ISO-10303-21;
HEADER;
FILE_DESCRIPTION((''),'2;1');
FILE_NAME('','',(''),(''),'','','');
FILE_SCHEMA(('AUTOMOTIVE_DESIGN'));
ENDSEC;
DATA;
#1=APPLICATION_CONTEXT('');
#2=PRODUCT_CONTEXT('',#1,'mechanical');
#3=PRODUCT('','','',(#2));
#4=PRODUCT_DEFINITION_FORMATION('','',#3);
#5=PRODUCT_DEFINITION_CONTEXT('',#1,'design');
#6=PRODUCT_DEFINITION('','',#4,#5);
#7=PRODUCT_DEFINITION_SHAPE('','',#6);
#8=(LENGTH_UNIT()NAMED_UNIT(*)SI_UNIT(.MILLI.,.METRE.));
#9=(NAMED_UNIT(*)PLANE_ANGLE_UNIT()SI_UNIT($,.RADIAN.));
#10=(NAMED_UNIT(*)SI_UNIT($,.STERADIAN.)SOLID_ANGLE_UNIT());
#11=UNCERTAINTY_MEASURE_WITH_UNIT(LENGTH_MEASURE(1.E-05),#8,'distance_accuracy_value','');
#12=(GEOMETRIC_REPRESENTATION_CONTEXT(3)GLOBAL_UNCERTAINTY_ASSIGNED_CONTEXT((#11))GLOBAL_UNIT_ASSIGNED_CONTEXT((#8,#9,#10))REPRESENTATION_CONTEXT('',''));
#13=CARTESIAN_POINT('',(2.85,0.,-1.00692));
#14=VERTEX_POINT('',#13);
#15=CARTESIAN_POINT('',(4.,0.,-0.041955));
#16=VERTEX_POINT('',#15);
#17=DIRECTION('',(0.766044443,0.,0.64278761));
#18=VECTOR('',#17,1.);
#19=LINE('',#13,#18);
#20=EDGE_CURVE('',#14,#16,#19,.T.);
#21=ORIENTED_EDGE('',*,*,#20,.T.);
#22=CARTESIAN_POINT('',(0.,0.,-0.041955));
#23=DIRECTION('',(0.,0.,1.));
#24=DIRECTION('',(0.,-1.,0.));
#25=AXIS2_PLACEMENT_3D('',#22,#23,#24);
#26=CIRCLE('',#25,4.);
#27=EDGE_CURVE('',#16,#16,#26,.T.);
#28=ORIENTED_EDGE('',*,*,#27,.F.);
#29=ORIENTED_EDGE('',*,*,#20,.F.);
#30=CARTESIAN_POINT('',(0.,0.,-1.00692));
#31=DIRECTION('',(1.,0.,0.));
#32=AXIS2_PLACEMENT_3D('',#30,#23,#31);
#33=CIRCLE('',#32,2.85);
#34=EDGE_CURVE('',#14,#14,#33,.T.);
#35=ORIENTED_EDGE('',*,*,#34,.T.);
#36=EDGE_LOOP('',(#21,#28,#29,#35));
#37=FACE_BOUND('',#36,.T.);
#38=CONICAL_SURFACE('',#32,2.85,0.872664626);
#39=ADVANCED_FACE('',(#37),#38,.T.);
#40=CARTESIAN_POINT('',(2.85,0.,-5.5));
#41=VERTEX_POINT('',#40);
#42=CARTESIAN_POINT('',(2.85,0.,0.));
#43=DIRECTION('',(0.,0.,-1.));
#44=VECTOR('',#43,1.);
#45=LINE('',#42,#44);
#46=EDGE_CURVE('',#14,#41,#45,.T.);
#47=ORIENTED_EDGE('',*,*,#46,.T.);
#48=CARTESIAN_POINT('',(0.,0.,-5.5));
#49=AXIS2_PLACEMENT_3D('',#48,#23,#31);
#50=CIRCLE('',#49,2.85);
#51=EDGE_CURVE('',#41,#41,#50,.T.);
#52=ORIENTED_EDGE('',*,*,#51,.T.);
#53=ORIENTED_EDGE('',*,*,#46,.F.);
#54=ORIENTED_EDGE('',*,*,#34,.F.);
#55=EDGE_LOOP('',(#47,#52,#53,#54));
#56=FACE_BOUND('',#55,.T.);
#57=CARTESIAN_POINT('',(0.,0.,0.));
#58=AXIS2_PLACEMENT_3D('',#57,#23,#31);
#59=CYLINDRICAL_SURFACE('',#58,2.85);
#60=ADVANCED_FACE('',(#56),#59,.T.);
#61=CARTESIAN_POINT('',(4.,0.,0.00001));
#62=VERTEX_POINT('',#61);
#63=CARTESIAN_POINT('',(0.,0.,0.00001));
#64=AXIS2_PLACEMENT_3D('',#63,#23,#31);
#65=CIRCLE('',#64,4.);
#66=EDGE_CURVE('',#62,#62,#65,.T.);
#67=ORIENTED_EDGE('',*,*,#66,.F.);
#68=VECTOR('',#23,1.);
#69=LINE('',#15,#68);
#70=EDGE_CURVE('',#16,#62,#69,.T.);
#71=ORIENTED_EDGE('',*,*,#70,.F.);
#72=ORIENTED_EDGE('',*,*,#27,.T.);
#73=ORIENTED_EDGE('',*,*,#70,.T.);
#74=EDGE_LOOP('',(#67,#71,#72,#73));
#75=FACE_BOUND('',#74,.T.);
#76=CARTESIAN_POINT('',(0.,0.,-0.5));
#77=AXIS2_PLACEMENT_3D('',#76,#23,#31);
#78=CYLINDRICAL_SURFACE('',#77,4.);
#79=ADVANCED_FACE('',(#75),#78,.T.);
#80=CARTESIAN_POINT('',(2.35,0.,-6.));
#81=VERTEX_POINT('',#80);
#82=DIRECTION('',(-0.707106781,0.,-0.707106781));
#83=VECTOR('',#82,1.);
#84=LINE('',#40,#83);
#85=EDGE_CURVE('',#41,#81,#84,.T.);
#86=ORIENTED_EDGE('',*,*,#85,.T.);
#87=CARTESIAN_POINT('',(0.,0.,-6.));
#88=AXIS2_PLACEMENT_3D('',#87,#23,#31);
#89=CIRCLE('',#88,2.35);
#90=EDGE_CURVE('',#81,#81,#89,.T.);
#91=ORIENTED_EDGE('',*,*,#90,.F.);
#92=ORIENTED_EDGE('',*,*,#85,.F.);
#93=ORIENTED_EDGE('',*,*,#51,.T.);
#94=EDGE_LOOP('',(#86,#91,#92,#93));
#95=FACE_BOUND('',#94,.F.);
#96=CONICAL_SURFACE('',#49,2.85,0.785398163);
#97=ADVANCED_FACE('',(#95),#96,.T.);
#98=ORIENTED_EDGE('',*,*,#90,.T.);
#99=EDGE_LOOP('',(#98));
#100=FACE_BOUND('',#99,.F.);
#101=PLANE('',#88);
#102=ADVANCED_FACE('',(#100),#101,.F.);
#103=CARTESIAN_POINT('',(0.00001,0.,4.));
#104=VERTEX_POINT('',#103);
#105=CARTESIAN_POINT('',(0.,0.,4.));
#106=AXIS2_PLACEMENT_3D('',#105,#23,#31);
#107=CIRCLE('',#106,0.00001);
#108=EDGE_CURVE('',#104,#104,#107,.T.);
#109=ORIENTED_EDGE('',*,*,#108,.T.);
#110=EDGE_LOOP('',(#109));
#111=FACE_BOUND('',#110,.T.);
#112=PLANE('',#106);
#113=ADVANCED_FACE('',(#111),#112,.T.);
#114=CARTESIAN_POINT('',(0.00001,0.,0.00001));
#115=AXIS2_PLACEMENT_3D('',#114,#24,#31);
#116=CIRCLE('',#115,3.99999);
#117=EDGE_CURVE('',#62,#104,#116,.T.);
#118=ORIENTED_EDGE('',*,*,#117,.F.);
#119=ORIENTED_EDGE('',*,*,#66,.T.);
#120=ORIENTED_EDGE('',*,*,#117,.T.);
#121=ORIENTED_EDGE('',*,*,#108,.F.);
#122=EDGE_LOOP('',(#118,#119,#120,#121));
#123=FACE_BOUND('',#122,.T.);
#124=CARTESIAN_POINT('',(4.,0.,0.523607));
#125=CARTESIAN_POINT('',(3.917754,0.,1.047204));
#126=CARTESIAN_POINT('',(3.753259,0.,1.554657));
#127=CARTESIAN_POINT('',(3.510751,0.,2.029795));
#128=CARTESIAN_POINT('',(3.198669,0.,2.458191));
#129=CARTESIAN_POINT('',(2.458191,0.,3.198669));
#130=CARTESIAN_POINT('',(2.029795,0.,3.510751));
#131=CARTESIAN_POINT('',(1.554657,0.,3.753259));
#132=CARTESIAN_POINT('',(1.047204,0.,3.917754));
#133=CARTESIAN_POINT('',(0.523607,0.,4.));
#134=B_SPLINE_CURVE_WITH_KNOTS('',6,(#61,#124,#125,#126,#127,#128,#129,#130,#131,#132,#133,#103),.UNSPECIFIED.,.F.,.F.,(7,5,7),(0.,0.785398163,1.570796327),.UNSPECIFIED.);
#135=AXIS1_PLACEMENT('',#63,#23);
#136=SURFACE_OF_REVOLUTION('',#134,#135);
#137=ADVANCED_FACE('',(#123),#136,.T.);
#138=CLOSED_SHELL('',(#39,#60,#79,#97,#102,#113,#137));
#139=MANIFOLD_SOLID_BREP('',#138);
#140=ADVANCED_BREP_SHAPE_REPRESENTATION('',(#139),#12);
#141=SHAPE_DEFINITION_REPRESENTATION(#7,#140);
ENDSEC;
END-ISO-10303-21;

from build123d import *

# Parameters (mm, degrees)
F0_R        = 4
F0_R_2      = 2.85
F1_DEPTH    = 4
F2_DEPTH    = 6
F3_R        = 3.99999
F4_SIZE     = 0.5
F5_S5_R     = 4
F5_T6_DEPTH = 7


# Not quite as in the source:
# - a fillet or chamfer that OpenCascade refuses, or shapes differently, is made with other operations: its cross-section is extruded or revolved along the edge and cut away or added
# - a fillet or chamfer is up to 0.001 mm smaller than in the source, because OpenCascade refuses the exact size


with BuildPart() as f1:
    # F0 (on Top) → F1 (new body)
    with BuildSketch(Plane.XY):
        Circle(F0_R)
        Circle(F0_R_2, mode=Mode.SUBTRACT)
        Circle(F0_R_2)
    extrude(amount=F1_DEPTH)

    # F0 (on Top) → F2 (join)
    with BuildSketch(Plane.XY):
        Circle(F0_R_2)
    extrude(amount=-F2_DEPTH)

    # F3 (radius 4 in the source; OpenCascade refuses exactly that, so slightly less here)
    f3_edges = [f1.edges().sort_by_distance(p)[0] for p in [
        (-4, 0, 4),
    ]]
    fillet(f3_edges, radius=F3_R)

    # F4
    f4_edges = [f1.edges().sort_by_distance(p)[0] for p in [
        (-2.85, 0, -6),
    ]]
    chamfer(f4_edges, length=F4_SIZE)

    # F5: chamfer of 1.2 x 1.0069195574 on 1 edges, made by hand


with BuildPart() as f5_tool2:
    # F5_s3 → F5_t4 (revolve)
    with BuildSketch(Plane.XZ):
        Polygon((2.85, -1.0069195574), (4.05, 0), (2.85, 0), align=None)
    revolve(axis=Axis((0, 0, 0), (0, 0, 1)))

    # F5_s5 → F5_t6 (intersect, symmetric)
    with BuildSketch(Plane.XY.offset(-0.5)):
        Circle(F5_S5_R)
    extrude(amount=F5_T6_DEPTH, both=True, mode=Mode.INTERSECT)


with BuildPart() as f1_1:
    add(f1.part)

    # F5_t1: union F5_tool2
    add(f5_tool2.part)


solid = f1_1.part
